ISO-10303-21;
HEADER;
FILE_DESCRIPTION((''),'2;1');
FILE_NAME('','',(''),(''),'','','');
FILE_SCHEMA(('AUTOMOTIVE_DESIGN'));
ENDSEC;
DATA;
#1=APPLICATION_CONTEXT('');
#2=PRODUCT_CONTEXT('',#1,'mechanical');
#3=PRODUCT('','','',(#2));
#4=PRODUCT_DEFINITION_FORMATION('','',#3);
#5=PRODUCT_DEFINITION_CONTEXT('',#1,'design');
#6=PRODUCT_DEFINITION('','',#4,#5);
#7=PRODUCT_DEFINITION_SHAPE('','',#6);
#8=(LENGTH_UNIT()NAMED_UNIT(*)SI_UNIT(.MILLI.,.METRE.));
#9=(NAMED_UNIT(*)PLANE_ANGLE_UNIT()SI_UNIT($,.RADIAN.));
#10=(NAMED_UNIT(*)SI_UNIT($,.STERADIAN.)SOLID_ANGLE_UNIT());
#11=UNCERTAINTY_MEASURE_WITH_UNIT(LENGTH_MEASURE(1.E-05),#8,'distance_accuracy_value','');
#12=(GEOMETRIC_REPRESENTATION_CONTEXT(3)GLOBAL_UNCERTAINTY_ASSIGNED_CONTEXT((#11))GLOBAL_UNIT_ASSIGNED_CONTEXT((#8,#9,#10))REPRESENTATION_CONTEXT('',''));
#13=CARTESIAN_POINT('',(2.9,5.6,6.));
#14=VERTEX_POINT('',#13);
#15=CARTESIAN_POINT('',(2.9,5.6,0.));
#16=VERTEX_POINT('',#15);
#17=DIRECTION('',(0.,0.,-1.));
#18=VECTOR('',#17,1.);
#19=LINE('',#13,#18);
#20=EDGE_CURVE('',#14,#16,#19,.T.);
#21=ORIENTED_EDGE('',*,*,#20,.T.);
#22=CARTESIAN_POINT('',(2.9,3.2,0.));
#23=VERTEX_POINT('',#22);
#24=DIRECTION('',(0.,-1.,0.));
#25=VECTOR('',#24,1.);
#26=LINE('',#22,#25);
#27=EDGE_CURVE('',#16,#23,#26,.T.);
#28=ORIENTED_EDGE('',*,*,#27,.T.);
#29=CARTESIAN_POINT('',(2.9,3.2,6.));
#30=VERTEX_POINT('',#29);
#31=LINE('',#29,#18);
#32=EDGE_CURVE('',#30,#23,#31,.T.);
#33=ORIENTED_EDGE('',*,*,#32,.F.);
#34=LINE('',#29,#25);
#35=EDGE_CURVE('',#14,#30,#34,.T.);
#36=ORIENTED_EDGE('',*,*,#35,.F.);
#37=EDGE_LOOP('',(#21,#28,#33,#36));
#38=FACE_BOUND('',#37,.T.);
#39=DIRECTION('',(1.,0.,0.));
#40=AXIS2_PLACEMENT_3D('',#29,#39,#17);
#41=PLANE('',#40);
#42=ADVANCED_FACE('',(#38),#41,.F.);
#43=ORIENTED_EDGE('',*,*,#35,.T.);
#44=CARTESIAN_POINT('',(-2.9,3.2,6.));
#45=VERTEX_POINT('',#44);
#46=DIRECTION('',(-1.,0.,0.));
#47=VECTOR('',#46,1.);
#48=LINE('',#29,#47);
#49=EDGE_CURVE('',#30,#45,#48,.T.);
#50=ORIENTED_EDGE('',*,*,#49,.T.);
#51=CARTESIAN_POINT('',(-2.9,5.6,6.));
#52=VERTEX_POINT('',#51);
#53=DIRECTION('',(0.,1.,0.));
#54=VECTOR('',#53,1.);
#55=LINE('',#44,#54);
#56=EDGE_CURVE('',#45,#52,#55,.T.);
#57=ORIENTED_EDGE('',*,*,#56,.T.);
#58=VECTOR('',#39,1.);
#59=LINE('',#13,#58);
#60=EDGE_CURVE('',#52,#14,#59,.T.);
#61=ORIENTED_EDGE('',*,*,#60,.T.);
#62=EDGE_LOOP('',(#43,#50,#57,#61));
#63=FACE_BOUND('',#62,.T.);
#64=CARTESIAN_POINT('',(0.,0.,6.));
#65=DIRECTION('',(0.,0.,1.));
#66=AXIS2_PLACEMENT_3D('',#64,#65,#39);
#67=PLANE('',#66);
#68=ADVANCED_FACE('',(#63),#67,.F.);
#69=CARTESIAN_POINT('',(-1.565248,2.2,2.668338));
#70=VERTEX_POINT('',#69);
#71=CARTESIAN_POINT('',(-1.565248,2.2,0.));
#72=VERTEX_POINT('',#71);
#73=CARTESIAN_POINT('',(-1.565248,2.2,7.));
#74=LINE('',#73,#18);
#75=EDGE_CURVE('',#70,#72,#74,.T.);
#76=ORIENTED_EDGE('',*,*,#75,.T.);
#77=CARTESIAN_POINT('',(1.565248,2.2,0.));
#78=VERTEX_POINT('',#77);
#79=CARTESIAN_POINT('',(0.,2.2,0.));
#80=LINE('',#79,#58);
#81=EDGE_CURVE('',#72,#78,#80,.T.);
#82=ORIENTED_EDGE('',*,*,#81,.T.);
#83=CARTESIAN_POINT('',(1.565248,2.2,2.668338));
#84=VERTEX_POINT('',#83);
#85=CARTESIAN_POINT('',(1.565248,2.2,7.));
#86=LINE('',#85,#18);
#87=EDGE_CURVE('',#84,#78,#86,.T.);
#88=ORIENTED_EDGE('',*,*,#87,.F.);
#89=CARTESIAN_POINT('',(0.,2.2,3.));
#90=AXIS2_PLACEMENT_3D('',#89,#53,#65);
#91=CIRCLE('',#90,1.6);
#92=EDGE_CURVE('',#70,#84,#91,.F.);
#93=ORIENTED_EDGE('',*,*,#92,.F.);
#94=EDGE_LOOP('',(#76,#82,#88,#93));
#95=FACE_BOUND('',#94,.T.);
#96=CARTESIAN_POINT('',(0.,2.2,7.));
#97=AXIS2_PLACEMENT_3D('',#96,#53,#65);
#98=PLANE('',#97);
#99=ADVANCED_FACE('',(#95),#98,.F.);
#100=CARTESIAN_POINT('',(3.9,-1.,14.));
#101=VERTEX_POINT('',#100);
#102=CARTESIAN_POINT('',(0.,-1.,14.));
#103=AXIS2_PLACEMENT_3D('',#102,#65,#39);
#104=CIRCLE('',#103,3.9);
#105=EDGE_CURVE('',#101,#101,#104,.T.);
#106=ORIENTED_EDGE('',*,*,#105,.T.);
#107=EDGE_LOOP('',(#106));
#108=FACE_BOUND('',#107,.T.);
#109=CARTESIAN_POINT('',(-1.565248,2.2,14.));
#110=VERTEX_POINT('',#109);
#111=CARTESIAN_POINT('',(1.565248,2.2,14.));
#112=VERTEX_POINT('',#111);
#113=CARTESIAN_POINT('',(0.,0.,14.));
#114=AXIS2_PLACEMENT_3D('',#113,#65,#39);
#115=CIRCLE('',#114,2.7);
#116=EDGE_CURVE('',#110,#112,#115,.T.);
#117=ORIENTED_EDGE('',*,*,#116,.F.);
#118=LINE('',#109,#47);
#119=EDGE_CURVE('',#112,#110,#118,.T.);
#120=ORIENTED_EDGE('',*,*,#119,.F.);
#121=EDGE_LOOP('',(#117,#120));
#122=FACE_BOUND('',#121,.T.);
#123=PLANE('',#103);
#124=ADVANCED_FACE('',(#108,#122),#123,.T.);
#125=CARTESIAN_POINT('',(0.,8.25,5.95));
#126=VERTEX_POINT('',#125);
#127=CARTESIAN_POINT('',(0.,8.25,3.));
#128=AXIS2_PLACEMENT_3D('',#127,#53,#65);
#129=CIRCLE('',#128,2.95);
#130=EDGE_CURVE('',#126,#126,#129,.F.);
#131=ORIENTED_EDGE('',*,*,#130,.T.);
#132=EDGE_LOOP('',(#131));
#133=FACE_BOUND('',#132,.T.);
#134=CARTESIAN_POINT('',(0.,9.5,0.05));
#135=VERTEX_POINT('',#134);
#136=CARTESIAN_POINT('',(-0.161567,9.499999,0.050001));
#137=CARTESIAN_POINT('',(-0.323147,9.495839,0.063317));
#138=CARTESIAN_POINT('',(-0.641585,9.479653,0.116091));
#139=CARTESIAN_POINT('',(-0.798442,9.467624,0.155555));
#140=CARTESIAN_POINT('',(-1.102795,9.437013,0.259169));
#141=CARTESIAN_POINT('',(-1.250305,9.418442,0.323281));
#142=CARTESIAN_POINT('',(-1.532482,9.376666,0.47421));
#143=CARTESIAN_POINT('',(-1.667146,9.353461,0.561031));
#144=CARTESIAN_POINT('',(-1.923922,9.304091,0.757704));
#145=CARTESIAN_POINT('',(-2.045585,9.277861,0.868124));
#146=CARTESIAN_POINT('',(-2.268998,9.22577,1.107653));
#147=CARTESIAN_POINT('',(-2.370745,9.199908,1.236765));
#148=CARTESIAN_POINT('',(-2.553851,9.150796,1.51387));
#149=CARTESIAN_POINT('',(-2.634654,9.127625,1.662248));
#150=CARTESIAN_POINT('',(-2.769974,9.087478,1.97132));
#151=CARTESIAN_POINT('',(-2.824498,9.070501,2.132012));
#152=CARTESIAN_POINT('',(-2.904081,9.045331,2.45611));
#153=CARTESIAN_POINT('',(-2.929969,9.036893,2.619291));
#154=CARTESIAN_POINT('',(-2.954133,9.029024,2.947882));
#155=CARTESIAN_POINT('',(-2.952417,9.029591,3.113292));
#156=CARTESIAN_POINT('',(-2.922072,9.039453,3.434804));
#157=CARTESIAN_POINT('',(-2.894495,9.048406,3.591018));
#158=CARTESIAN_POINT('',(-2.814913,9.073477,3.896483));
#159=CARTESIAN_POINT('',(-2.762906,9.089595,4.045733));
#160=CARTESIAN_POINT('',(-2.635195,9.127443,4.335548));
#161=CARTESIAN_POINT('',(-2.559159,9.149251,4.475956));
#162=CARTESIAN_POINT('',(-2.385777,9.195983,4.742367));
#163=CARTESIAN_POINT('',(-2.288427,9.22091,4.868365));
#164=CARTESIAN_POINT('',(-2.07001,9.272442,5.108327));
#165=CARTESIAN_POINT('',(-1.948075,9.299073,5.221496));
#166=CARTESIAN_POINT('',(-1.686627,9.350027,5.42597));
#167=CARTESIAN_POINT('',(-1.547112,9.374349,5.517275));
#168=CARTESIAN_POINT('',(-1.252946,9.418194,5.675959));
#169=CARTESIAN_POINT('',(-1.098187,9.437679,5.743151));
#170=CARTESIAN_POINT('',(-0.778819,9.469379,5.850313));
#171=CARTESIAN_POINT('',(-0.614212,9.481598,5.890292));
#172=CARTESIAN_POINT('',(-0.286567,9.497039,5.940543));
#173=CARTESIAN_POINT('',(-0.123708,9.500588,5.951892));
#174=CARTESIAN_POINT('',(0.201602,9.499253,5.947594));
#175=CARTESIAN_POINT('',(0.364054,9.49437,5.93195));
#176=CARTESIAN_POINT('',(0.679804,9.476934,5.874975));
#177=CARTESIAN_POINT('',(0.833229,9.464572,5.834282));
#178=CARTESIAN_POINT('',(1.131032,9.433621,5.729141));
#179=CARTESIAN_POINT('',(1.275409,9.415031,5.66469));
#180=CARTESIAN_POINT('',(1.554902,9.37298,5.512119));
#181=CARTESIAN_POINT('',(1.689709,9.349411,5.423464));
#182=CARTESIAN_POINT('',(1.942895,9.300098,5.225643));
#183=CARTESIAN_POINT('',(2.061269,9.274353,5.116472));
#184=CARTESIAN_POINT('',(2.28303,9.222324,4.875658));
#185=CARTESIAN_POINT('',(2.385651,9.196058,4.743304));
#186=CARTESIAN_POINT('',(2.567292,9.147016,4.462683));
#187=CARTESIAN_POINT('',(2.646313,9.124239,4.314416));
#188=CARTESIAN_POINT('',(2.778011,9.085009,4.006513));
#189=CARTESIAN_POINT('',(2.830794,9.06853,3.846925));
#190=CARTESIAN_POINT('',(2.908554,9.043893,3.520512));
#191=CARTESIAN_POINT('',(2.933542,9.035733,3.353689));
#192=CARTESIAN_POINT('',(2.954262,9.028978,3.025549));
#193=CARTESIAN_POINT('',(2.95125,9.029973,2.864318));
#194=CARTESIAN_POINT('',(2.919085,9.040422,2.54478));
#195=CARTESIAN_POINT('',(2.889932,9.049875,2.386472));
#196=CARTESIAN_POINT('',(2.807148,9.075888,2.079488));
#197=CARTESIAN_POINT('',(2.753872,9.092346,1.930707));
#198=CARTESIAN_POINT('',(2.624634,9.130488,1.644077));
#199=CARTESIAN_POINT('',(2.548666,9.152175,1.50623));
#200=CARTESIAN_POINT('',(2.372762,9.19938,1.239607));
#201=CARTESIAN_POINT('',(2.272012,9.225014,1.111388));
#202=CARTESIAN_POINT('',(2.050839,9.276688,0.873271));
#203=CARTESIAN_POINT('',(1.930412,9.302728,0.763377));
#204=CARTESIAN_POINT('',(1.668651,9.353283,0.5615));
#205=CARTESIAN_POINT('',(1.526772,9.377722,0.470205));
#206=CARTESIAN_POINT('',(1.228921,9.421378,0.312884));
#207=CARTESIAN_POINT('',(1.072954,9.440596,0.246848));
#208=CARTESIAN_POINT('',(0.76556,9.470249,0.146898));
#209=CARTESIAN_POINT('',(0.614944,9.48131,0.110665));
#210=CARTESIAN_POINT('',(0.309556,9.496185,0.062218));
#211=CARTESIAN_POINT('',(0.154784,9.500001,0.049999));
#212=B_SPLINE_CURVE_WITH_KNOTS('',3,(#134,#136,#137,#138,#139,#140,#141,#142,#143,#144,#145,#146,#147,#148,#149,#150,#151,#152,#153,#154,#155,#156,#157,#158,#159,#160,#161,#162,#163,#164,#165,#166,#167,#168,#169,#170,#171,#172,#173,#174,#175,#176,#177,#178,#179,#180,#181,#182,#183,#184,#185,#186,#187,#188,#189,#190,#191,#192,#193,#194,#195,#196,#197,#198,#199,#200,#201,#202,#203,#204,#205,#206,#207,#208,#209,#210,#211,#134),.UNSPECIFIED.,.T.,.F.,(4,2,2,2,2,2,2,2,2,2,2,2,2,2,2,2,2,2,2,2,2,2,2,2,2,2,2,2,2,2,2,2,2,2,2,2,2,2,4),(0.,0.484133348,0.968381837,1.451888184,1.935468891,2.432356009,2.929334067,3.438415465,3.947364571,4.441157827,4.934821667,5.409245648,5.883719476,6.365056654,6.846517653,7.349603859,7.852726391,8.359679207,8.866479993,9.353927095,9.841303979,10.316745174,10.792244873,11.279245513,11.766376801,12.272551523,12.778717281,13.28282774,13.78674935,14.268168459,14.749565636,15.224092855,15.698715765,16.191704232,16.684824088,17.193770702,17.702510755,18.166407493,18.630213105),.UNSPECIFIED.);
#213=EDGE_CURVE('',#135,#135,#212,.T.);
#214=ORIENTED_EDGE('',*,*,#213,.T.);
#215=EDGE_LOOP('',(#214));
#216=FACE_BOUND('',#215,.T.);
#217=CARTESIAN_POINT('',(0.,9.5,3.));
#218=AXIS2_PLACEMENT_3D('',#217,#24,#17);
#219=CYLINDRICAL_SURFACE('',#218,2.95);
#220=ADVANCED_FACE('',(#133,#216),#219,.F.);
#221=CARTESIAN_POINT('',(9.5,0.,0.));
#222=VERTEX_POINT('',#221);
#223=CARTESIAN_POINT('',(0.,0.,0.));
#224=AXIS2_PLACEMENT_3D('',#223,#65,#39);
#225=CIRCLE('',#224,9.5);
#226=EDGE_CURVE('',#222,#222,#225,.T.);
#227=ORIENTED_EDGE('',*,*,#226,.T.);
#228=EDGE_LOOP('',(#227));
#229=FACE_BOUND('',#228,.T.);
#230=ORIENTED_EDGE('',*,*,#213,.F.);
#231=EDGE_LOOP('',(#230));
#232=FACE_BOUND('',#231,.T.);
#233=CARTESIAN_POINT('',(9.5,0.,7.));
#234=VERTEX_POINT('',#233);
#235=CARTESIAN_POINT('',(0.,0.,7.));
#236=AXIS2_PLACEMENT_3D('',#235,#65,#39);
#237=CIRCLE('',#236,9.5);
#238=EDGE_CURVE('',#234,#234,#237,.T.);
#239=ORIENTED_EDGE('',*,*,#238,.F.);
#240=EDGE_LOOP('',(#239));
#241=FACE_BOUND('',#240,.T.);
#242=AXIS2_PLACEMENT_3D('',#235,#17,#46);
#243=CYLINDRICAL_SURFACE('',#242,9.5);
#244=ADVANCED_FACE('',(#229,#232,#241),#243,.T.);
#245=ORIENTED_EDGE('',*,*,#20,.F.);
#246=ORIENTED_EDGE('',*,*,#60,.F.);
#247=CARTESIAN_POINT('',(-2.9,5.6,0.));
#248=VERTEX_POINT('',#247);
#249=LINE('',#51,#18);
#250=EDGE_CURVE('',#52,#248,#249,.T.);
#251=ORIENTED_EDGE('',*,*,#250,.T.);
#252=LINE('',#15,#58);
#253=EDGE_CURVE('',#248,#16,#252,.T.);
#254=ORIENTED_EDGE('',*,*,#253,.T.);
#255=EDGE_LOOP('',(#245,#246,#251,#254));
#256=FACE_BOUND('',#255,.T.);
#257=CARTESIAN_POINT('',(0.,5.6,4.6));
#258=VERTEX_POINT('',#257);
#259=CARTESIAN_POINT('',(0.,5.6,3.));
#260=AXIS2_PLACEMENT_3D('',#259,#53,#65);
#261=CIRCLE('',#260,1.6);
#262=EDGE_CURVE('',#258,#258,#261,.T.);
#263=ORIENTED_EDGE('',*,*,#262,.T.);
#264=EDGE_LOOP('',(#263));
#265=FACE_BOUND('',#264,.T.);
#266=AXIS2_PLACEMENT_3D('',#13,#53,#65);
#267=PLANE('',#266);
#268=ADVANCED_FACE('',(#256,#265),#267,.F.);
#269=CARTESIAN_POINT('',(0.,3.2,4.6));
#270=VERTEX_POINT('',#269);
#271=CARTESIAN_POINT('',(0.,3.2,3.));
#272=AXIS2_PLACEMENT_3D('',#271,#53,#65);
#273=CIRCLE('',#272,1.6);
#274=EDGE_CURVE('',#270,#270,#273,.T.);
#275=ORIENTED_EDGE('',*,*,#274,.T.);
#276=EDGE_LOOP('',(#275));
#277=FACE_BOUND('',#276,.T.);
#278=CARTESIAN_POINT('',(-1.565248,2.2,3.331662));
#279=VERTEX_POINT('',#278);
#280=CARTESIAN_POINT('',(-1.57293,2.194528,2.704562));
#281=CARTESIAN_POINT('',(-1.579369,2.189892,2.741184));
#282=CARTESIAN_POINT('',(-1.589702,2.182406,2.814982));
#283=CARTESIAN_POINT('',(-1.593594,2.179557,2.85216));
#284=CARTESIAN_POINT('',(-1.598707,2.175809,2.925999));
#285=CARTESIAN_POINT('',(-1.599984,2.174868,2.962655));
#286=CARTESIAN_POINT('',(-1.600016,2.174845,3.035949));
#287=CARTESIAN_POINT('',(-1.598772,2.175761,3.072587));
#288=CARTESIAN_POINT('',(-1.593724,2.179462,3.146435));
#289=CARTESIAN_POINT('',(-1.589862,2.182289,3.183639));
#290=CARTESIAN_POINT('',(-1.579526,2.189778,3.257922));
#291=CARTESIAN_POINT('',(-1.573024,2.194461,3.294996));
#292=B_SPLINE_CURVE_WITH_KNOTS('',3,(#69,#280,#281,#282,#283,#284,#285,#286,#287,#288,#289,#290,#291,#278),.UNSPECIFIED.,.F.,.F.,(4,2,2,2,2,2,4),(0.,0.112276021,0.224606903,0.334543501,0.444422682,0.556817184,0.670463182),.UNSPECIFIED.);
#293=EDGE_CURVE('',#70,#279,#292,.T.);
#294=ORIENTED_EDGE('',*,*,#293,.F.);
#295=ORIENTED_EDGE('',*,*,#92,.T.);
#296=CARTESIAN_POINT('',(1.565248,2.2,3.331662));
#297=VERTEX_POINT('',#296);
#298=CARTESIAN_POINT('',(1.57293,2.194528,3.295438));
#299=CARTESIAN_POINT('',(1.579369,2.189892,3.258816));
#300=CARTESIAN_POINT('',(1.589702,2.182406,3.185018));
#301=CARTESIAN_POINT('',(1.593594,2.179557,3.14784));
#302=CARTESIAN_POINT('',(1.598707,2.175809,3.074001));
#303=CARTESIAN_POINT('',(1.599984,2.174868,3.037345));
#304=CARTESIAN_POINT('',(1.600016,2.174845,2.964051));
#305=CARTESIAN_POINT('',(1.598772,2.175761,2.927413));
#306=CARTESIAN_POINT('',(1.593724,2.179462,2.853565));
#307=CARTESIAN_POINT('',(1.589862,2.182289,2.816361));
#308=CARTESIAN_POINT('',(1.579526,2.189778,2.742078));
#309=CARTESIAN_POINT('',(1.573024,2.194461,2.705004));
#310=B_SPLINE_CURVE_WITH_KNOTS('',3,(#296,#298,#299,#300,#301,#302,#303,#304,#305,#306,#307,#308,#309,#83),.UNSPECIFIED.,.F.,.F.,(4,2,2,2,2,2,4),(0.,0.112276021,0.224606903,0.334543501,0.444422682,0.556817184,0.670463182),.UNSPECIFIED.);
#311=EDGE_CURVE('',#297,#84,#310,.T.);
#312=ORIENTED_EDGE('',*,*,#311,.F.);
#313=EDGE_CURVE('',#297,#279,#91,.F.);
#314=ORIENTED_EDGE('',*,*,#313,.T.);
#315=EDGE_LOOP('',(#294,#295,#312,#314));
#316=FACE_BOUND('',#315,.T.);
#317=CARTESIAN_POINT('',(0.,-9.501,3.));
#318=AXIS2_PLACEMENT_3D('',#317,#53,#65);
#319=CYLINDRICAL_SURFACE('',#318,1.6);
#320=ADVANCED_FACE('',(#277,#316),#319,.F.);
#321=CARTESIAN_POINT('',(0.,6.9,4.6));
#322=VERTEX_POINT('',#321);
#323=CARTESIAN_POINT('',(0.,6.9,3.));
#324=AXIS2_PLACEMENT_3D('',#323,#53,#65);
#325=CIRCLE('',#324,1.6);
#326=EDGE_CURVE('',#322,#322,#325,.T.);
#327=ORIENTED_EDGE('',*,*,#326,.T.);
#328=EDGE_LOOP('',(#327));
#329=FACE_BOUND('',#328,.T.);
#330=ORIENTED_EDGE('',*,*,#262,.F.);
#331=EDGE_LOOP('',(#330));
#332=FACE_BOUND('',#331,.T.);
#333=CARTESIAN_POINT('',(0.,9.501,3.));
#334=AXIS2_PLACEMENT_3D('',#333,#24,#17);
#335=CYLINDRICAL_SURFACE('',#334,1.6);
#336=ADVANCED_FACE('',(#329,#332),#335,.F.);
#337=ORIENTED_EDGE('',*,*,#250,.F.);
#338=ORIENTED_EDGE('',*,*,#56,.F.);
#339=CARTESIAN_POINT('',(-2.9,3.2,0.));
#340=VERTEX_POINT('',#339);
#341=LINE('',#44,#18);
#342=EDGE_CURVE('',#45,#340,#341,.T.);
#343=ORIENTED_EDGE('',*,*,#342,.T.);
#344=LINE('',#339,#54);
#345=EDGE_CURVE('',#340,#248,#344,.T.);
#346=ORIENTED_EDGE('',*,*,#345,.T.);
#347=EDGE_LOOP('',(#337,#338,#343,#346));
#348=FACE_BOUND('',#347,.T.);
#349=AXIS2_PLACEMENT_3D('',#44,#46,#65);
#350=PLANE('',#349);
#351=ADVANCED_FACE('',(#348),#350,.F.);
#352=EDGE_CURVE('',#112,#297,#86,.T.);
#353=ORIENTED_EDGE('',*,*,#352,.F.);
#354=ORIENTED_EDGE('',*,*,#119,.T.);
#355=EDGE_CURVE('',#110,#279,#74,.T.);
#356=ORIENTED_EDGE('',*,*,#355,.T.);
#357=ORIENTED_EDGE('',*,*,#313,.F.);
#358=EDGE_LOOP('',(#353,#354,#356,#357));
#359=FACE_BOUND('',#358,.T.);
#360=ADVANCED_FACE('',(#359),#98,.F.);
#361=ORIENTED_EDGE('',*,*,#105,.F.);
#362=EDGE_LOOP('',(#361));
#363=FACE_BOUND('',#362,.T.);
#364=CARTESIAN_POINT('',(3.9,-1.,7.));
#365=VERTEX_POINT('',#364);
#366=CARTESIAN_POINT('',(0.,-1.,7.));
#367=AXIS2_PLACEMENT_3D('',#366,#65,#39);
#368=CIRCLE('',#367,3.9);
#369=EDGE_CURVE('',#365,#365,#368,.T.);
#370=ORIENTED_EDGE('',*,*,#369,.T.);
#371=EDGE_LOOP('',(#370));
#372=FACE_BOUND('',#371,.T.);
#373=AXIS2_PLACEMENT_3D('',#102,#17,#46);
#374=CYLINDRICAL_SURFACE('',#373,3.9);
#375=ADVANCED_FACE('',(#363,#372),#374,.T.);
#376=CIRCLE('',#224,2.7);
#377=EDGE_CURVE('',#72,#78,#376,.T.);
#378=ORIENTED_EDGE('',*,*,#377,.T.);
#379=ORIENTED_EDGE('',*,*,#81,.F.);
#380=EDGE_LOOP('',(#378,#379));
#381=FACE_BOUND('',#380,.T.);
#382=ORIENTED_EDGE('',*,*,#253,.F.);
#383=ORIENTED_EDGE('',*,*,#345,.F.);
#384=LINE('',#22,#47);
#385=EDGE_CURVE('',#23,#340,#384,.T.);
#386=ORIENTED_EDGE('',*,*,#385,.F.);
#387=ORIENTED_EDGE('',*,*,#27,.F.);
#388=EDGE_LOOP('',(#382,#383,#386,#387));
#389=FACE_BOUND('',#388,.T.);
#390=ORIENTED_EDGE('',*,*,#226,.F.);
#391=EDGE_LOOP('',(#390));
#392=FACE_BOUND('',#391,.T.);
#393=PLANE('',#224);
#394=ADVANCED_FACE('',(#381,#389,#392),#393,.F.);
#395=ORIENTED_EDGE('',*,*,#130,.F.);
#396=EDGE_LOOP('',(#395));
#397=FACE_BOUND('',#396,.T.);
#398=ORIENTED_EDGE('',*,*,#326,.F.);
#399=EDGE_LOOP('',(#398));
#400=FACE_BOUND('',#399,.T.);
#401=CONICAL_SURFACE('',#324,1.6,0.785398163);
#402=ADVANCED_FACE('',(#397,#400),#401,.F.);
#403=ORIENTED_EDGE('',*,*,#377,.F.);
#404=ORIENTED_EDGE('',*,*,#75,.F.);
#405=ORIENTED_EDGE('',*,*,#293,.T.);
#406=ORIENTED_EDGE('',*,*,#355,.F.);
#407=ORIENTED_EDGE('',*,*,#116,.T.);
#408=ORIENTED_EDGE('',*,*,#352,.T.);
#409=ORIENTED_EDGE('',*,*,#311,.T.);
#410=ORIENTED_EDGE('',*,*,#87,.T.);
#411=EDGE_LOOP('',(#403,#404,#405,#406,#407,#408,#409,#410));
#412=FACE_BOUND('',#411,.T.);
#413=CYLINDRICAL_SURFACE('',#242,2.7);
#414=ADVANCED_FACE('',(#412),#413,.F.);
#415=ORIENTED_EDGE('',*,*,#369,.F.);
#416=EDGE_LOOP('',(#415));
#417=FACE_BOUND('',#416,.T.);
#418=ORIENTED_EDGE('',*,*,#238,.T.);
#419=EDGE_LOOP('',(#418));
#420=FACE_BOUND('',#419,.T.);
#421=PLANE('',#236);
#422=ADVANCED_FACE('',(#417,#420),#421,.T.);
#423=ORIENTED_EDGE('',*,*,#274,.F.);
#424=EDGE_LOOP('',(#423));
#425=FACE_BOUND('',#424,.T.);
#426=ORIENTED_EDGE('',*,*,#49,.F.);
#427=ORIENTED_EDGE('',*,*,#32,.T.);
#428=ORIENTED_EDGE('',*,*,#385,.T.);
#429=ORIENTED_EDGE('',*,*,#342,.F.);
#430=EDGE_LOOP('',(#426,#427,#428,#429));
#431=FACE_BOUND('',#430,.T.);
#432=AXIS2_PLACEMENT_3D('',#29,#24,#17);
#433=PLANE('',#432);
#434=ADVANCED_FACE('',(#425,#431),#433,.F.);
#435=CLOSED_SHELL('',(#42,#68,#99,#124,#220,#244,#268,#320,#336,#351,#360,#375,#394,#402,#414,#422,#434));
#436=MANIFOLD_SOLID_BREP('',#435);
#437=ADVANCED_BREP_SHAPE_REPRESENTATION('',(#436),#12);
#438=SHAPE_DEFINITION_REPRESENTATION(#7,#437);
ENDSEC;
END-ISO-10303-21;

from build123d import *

# Parameters (mm, degrees)
ESQUISSE1_R                         = 9.5
BOSS_EXTRU_1_DEPTH                  = 7
ESQUISSE2_W                         = 5.8
ESQUISSE2_H                         = 2.4
ENL_V_MAT_EXTRU_1_DEPTH             = 6
ENL_V_MAT_EXTRU_2_REACH             = 19.336
ESQUISSE3_R                         = 1.6
ENL_V_MAT_EXTRU_2_DIRECTION_2_REACH = 19.336
ESQUISSE7_R                         = 2.95
ENL_V_MAT_EXTRU_8_DEPTH             = 22.858865638
CHANFREIN1_SIZE                     = 2
ESQUISSE9_R                         = 3.9
BOSS_EXTRU_2_DEPTH                  = 7


with BuildPart() as part:
    # Esquisse1 → Boss.-Extru.1 (new body)
    with BuildSketch(Plane.XY):
        Circle(ESQUISSE1_R)
        with BuildLine():
            Line((-1.565247584, 2.2), (1.565247584, 2.2))
            ThreePointArc((1.565247584, 2.2), (0, -2.7), (-1.565247584, 2.2))
        make_face(mode=Mode.SUBTRACT)
    extrude(amount=BOSS_EXTRU_1_DEPTH)

    # Esquisse2 → Enlèv. mat.-Extru.1 (cut)
    with BuildSketch(Plane(origin=(0, 0, 0), x_dir=(-1, 0, 0), z_dir=(0, 0, -1))):
        with Locations((0, 4.4)):
            Rectangle(ESQUISSE2_W, ESQUISSE2_H)
    extrude(amount=-ENL_V_MAT_EXTRU_1_DEPTH, mode=Mode.SUBTRACT)

    # Esquisse3 → Enlèv. mat.-Extru.2 (cut, up to next)
    with BuildSketch(Plane(origin=(0, 3.2, 0), x_dir=(1, 0, 0), z_dir=(0, 1, 0)), mode=Mode.PRIVATE) as enl_v_mat_extru_2_sk1:
        with Locations(Location((0, -3, 0), (0, 0, 90))):
            Circle(ESQUISSE3_R)
    enl_v_mat_extru_2_tool1 = extrude(enl_v_mat_extru_2_sk1.sketch, amount=-ENL_V_MAT_EXTRU_2_REACH, mode=Mode.PRIVATE) & part.part
    add(enl_v_mat_extru_2_tool1.solids().sort_by_distance((0, 3.2, 3))[0], mode=Mode.SUBTRACT)

    # Esquisse3 → Enlèv. mat.-Extru.2 direction 2 (cut, up to next)
    with BuildSketch(Plane(origin=(0, 3.2, 0), x_dir=(1, 0, 0), z_dir=(0, 1, 0)), mode=Mode.PRIVATE) as enl_v_mat_extru_2_direction_2_sk1:
        with Locations(Location((0, -3, 0), (0, 0, 90))):
            Circle(ESQUISSE3_R)
    enl_v_mat_extru_2_direction_2_tool1 = extrude(enl_v_mat_extru_2_direction_2_sk1.sketch, amount=ENL_V_MAT_EXTRU_2_DIRECTION_2_REACH, mode=Mode.PRIVATE) & part.part
    add(enl_v_mat_extru_2_direction_2_tool1.solids().sort_by_distance((0, 3.2, 3))[0], mode=Mode.SUBTRACT)

    # Esquisse7 → Enlèv. mat.-Extru.8 (cut, through all)
    with BuildSketch(Plane(origin=(0, 8.9, 0), x_dir=(1, 0, 0), z_dir=(0, 1, 0))):
        with Locations(Location((0, -3, 0), (0, 0, 90))):
            Circle(ESQUISSE7_R)
    extrude(amount=ENL_V_MAT_EXTRU_8_DEPTH, mode=Mode.SUBTRACT)

    # Chanfrein1
    # the kernel refuses this chamfer: 2 mm, written as the material it takes off along each edge
    with BuildSketch(Plane(origin=(0, 8.9, 3), x_dir=(0, 0, -1), z_dir=(-1, 0, 0))) as chanfrein1_piece_1_section:
        Polygon((1.6 + CHANFREIN1_SIZE, 0), (1.6, CHANFREIN1_SIZE), (1.6, 0), align=None)
    chanfrein1_piece_1 = revolve(axis=Axis((0, 8.9, 3), (0, -1, 0)), mode=Mode.PRIVATE)
    chanfrein1_piece_1 = chanfrein1_piece_1 & Plane(origin=(0, 7.567667742, 3), x_dir=(0, 0, -1), z_dir=(0, -1, 0)) * Cylinder(2.95, 15, mode=Mode.PRIVATE)
    add(chanfrein1_piece_1, mode=Mode.SUBTRACT)

    # Esquisse9 → Boss.-Extru.2 (add)
    with BuildSketch(Plane.XY.offset(7)):
        with Locations((0, -1)):
            Circle(ESQUISSE9_R)
        with BuildLine():
            Line((-1.565247584, 2.2), (1.565247584, 2.2))
            ThreePointArc((1.565247584, 2.2), (0, -2.7), (-1.565247584, 2.2))
        make_face(mode=Mode.SUBTRACT)
    extrude(amount=BOSS_EXTRU_2_DEPTH)


solid = part.part
